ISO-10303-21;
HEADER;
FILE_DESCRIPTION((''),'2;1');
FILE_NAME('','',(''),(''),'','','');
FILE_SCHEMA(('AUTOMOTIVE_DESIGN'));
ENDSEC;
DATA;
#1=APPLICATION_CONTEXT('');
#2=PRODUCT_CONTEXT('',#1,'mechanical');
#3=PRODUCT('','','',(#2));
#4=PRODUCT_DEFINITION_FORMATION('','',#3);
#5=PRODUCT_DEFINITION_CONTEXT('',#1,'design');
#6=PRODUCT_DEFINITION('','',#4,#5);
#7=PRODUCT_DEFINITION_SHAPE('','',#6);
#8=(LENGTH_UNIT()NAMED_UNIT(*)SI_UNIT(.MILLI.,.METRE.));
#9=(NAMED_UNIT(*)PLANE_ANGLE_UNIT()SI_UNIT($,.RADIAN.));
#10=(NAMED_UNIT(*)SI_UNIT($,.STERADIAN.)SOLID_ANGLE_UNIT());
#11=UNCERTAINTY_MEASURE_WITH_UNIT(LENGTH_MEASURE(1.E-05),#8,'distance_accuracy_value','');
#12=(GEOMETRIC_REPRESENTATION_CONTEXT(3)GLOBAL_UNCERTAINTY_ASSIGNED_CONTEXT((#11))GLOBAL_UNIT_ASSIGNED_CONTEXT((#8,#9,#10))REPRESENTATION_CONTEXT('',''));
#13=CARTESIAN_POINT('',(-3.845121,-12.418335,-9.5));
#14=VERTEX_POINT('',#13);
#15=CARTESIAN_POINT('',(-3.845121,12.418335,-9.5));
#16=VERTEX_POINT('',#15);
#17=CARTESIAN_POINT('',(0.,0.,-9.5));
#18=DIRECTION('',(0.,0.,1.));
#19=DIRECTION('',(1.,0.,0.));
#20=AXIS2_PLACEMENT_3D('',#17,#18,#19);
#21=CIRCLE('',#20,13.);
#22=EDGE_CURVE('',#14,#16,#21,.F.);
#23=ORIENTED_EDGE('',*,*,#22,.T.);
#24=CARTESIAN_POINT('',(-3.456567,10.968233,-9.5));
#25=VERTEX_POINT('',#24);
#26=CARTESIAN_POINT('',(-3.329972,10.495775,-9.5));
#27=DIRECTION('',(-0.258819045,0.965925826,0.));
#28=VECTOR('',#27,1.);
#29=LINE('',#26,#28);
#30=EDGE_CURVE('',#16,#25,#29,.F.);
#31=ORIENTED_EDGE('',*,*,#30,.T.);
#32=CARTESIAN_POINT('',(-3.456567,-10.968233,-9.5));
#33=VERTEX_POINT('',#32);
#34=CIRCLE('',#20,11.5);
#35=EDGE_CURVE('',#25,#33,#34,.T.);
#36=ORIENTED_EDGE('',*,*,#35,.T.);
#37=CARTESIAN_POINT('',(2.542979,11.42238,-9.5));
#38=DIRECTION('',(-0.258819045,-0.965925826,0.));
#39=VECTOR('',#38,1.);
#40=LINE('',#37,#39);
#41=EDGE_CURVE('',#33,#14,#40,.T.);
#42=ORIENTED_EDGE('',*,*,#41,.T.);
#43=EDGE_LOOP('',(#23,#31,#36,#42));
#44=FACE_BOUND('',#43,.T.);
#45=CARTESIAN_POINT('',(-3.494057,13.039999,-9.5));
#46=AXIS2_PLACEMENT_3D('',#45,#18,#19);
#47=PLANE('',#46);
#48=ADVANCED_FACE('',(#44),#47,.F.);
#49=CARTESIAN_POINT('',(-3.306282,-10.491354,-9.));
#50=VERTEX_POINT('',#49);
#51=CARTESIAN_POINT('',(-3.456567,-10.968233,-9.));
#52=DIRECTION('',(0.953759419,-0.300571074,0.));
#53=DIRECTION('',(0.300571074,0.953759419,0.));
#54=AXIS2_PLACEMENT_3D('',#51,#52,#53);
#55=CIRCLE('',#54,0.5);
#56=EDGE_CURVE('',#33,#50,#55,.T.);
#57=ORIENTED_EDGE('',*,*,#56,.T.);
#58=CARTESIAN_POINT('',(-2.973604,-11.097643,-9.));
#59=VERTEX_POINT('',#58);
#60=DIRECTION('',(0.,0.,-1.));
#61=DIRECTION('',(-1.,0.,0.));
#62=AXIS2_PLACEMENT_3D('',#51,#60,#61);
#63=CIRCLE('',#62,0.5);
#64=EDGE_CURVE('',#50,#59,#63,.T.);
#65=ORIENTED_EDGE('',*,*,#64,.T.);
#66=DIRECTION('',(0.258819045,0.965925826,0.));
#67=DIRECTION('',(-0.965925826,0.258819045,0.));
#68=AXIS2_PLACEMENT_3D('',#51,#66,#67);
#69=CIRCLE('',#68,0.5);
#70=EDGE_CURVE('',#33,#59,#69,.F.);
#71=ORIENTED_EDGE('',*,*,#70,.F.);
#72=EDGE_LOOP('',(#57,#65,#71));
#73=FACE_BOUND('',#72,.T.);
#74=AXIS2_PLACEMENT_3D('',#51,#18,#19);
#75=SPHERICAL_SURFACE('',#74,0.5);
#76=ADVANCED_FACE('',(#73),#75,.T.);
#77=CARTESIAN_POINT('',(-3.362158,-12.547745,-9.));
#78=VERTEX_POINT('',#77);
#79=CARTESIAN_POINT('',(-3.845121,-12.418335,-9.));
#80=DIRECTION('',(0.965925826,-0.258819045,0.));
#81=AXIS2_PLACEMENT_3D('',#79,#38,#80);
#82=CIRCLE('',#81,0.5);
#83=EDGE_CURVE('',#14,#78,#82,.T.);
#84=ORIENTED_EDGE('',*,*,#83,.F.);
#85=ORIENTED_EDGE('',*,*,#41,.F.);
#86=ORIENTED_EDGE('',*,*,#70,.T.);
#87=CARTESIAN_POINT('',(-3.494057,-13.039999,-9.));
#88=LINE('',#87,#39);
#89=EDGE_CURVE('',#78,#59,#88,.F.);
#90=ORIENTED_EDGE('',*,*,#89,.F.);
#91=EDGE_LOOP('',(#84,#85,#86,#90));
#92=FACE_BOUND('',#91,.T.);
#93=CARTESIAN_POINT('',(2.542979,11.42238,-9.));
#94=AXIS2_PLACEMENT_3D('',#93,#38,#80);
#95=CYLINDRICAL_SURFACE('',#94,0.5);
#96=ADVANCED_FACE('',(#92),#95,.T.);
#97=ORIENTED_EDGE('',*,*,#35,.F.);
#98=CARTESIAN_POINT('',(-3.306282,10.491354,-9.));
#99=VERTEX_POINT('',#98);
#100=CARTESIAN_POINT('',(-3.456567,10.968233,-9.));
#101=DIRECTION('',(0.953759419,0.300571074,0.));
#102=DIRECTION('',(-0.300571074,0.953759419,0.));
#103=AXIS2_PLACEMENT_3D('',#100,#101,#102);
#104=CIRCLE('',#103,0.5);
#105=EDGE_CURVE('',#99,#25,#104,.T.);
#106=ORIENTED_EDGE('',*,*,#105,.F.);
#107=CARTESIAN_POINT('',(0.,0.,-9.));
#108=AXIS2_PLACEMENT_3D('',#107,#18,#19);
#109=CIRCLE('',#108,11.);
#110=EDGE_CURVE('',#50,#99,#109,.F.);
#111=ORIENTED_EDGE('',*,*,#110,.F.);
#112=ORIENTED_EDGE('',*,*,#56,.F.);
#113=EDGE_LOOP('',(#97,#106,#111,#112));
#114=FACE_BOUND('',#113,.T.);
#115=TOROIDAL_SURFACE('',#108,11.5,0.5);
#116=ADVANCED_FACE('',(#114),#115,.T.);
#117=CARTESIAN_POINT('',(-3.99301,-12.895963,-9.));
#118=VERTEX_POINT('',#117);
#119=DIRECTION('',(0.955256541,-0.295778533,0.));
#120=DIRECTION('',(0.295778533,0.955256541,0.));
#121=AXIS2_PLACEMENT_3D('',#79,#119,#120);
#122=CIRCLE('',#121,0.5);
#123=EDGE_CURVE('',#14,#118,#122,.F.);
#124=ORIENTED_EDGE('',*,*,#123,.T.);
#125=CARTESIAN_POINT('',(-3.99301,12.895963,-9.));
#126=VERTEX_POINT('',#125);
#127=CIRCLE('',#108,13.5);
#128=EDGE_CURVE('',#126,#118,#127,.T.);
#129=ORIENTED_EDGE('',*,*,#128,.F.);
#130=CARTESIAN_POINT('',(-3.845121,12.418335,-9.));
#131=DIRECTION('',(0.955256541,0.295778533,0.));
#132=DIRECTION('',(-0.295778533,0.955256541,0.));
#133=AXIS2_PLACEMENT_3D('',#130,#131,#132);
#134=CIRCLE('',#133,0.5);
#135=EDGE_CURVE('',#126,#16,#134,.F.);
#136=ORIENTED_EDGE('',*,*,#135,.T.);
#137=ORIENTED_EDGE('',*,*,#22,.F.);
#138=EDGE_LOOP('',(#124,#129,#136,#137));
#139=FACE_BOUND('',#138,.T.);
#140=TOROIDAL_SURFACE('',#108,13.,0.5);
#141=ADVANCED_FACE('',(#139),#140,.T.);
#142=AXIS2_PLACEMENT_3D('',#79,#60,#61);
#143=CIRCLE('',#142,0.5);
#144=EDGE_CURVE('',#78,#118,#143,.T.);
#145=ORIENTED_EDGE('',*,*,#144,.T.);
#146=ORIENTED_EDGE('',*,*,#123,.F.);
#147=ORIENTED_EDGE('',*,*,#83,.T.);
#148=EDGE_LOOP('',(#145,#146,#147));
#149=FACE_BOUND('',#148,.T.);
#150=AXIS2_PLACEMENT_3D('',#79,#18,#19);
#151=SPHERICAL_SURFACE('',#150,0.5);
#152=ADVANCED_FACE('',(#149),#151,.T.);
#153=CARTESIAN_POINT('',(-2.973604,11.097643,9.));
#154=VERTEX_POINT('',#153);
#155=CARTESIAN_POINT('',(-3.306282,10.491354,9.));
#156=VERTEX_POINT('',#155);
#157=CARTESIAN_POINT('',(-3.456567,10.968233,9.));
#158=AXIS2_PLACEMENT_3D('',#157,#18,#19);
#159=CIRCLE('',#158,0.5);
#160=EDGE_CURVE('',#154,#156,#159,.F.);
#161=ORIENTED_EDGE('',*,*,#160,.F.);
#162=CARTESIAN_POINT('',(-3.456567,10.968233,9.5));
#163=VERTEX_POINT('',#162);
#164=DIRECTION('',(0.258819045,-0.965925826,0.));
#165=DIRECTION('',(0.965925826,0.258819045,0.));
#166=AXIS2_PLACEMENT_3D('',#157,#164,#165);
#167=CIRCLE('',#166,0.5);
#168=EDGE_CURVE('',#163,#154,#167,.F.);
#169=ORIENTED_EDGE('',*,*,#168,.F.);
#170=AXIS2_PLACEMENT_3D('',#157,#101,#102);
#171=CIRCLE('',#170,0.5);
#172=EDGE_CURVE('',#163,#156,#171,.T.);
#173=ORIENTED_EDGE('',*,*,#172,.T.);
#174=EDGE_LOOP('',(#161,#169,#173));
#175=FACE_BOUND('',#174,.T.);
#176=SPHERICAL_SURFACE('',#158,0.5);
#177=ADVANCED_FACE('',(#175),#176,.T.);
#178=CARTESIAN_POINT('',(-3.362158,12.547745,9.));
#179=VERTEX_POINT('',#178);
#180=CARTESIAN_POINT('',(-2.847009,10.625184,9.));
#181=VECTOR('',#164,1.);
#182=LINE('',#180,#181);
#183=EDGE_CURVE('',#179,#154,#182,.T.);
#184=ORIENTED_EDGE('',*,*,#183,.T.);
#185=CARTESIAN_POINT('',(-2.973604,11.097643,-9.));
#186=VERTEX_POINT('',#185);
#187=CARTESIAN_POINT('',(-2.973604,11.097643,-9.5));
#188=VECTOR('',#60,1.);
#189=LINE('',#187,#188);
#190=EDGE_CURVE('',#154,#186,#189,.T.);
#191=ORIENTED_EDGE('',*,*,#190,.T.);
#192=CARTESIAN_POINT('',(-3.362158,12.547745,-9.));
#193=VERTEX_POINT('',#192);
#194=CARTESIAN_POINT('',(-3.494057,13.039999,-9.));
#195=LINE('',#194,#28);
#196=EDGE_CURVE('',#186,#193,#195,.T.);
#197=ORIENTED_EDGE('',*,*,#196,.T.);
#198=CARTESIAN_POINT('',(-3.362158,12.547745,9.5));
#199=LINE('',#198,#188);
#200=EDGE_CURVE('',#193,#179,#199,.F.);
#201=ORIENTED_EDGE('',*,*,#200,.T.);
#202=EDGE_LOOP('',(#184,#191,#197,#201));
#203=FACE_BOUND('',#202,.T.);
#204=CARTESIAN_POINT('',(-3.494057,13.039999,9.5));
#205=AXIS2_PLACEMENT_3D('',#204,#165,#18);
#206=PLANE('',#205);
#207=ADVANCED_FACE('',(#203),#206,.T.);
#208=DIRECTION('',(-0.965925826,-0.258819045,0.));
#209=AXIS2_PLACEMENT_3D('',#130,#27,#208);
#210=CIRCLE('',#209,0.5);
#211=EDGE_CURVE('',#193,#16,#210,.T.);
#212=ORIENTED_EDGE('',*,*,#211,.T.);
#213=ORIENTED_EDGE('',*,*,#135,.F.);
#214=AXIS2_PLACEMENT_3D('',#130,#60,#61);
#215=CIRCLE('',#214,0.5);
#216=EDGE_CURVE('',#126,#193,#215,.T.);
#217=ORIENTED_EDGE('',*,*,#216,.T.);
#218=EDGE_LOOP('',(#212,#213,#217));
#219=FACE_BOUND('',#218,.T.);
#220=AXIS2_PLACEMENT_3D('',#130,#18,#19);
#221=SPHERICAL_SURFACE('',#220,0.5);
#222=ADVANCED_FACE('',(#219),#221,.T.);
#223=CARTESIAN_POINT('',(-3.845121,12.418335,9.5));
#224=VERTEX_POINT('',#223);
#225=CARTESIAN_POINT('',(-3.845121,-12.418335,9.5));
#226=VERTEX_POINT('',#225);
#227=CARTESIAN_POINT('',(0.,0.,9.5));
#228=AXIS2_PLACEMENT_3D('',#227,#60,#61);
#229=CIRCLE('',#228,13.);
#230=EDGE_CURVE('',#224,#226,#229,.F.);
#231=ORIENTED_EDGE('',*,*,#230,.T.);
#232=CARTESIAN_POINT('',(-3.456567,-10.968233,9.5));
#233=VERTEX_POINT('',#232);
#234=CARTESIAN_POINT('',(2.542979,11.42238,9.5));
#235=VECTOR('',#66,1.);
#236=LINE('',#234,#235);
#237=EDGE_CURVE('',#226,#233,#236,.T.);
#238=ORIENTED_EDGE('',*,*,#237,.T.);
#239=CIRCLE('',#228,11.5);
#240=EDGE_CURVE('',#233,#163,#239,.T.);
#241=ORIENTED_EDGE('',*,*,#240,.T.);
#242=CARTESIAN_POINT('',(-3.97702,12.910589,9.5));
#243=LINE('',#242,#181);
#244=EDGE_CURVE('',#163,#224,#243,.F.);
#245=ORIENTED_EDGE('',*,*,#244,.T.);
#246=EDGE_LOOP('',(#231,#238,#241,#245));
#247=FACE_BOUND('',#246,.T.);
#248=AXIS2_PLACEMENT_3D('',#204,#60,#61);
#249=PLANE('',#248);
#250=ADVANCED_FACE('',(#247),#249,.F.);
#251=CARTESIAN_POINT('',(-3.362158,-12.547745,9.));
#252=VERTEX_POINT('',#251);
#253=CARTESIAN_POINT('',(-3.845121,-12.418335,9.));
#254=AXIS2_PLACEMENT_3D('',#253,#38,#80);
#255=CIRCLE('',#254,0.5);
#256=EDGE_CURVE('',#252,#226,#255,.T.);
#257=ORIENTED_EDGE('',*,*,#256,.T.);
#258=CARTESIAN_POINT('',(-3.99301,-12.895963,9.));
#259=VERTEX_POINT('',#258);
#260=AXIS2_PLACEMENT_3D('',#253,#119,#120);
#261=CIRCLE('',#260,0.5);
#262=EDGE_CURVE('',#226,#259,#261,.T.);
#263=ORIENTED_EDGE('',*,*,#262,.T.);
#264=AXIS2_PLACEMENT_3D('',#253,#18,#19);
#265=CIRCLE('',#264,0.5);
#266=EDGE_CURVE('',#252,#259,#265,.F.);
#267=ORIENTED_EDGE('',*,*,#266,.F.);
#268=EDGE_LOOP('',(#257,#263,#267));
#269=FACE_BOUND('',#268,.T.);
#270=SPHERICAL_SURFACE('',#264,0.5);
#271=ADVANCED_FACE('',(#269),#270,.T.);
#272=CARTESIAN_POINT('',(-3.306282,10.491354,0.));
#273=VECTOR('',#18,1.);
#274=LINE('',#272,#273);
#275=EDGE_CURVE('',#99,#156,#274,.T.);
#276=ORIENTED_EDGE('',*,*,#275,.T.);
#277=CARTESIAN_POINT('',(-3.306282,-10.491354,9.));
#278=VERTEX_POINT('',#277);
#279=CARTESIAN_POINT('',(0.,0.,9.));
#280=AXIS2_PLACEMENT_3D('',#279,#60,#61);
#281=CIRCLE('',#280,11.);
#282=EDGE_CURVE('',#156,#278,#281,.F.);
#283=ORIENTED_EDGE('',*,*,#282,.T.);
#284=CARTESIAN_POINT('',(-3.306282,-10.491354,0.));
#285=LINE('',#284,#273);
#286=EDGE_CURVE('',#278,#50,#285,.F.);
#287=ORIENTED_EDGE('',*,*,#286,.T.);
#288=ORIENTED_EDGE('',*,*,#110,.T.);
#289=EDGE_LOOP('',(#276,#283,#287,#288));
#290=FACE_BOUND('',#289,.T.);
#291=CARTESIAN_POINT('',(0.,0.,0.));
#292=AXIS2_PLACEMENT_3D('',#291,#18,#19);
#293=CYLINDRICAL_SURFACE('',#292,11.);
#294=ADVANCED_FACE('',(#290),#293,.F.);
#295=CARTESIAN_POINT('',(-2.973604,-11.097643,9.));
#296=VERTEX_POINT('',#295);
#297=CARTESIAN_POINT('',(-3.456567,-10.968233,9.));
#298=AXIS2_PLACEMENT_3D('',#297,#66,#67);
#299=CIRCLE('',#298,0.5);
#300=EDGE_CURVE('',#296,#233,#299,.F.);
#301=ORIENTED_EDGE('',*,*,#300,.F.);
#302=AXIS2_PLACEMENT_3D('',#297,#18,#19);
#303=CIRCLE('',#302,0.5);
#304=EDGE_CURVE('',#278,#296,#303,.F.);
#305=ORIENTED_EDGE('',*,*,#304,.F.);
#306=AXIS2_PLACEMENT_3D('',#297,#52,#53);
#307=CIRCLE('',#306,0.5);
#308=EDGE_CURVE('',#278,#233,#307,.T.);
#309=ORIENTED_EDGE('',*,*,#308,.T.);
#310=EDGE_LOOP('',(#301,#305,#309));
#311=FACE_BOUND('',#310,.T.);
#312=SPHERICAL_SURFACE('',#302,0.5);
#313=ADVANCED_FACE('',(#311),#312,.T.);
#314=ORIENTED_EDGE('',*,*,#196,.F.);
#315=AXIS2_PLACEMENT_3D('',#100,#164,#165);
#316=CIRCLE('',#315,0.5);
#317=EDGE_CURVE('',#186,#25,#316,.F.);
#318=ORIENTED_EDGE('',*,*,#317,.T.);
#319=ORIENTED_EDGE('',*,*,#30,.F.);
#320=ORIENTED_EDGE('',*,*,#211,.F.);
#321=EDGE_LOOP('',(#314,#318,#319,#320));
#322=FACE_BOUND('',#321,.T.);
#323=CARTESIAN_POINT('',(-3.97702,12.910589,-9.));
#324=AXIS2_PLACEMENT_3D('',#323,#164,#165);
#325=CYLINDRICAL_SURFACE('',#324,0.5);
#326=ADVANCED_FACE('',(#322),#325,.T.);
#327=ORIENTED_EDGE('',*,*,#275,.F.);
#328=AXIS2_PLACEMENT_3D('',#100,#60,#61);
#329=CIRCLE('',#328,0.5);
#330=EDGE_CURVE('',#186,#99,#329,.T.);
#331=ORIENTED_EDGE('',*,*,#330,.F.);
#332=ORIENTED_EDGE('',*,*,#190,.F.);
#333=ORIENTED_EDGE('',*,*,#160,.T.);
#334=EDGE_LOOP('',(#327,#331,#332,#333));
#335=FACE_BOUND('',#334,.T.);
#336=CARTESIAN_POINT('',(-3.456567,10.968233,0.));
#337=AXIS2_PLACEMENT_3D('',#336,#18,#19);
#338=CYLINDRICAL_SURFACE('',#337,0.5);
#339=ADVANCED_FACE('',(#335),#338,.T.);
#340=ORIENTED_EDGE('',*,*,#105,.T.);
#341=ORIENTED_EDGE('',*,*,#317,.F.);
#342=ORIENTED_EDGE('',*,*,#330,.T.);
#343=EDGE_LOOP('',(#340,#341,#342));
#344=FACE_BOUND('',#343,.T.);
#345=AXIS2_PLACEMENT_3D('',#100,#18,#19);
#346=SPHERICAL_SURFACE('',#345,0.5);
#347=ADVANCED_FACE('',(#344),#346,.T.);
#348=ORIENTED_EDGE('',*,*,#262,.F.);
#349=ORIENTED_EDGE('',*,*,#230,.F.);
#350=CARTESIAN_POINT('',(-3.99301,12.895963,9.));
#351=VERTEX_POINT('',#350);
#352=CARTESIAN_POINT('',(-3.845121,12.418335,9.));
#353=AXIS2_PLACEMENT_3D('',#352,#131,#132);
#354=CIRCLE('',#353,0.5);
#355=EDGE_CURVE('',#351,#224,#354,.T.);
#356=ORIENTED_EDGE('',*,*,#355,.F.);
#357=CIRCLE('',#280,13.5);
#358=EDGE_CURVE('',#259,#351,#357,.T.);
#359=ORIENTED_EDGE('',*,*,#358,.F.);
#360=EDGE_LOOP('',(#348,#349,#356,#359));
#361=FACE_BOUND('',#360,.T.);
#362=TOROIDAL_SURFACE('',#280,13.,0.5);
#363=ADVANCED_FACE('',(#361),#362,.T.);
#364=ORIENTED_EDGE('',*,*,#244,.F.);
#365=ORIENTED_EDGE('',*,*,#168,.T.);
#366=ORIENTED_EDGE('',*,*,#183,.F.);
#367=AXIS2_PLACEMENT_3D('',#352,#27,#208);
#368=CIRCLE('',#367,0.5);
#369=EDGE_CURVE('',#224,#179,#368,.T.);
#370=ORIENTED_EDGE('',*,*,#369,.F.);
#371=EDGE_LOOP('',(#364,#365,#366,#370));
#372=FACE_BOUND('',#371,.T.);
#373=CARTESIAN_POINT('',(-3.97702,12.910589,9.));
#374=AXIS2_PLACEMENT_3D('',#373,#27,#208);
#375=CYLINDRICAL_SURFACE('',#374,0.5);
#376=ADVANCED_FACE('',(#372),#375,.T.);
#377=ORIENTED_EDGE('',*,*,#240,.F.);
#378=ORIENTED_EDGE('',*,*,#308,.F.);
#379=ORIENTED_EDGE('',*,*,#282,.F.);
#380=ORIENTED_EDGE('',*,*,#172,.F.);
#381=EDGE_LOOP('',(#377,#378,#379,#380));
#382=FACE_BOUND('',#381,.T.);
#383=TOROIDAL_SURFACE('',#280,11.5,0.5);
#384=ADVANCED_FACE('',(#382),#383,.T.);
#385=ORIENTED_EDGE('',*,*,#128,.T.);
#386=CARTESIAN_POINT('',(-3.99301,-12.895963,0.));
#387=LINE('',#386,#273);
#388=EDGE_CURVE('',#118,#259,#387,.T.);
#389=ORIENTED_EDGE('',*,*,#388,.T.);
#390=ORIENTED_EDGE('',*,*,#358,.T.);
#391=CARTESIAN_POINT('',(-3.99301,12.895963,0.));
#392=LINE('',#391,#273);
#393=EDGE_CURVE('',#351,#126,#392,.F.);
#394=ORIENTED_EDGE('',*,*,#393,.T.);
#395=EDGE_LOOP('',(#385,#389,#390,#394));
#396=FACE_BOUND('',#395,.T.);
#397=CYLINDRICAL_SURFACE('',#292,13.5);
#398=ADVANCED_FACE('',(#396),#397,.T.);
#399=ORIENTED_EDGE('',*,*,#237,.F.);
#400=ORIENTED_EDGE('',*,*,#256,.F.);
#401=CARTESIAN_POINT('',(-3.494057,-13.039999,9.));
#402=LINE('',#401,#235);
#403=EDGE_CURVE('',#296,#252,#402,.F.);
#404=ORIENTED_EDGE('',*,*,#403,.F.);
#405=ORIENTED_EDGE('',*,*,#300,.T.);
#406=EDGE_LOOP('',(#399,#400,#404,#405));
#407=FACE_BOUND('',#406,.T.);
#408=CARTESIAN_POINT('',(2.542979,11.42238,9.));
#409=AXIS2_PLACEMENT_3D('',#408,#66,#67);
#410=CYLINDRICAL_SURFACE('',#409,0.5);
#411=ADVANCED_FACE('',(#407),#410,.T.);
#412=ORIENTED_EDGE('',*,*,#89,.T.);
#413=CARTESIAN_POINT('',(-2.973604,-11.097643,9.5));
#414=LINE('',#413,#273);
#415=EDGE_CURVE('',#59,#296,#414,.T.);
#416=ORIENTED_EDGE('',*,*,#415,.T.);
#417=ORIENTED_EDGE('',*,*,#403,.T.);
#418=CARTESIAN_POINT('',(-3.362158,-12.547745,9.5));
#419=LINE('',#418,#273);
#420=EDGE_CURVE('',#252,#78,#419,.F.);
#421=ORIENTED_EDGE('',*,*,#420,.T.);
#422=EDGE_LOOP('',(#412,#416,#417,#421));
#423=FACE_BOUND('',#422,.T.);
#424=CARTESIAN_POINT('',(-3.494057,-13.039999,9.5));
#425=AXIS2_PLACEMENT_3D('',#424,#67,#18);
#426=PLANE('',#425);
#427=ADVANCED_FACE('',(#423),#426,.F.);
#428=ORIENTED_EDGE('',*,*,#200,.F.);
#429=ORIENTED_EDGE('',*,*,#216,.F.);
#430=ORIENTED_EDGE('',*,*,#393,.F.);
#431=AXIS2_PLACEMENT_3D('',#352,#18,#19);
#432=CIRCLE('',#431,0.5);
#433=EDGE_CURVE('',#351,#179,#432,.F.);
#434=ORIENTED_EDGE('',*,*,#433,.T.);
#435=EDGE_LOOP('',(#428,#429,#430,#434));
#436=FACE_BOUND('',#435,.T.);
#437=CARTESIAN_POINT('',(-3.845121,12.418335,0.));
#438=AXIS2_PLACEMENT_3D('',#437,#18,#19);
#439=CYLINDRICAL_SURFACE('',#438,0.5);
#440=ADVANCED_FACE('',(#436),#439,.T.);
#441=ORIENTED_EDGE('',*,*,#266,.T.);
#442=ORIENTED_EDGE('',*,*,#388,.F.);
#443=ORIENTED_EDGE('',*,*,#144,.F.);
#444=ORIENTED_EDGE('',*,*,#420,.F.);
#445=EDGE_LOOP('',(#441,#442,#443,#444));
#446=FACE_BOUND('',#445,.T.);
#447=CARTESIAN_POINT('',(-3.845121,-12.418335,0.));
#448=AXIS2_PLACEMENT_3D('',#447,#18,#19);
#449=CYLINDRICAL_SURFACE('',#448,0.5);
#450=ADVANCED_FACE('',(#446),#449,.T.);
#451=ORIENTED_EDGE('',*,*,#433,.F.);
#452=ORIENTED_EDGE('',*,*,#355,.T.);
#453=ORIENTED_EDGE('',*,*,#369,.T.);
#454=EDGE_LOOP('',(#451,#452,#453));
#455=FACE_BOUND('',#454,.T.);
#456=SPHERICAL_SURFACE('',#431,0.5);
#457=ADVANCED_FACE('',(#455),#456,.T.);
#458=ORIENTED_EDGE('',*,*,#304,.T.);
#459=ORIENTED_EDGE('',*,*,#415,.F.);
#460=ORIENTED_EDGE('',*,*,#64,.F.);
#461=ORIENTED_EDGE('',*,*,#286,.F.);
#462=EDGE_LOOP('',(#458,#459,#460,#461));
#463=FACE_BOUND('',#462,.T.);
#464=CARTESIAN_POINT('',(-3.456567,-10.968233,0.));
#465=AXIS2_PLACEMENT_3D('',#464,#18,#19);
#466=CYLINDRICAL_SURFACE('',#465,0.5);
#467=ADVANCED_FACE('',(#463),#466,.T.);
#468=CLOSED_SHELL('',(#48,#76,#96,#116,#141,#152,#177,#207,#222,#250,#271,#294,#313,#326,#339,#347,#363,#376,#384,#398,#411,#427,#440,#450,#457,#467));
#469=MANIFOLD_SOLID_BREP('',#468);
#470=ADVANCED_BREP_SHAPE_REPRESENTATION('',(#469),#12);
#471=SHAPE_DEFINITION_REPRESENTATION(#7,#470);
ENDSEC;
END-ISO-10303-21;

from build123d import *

# Parameters (mm, degrees)
REVOLVE1_START = -9.5
REVOLVE1_DEPTH = 19
FILLET1_R      = 0.5


# Read off the part's stored shape, not the designer's step: Revolve1
with BuildPart() as part:
    # Revolve1 outline → Revolve1 (new body)
    with BuildSketch(Plane.XY.offset(REVOLVE1_START)):
        with BuildLine():
            Line((-2.847009496, 10.625184089), (-3.494057109, 13.039998655))
            ThreePointArc((-3.494057109, 13.039998655), (-13.5, 0), (-3.494057109, -13.039998655))
            Line((-3.494057109, -13.039998655), (-2.847009496, -10.625184089))
            ThreePointArc((-2.847009496, -10.625184089), (-11, 0), (-2.847009496, 10.625184089))
        make_face()
    extrude(amount=REVOLVE1_DEPTH)

    # Fillet1
    fillet1_edges = [part.edges().sort_by_distance(p)[0] for p in [
        (-2.847009496, 10.625184089, 0),
        (-3.170533302, 11.832591372, -9.5),
        (-3.170533302, -11.832591372, -9.5),
        (-3.494057109, -13.039998655, 0),
        (-3.170533302, -11.832591372, 9.5),
        (-2.847009496, -10.625184089, 0),
        (-3.494057109, 13.039998655, 0),
        (-13.5, 0, -9.5),
        (-11, 0, -9.5),
        (-11, 0, 9.5),
        (-13.5, 0, 9.5),
        (-3.170533302, 11.832591372, 9.5),
    ]]
    fillet(fillet1_edges, radius=FILLET1_R)


solid = part.part
